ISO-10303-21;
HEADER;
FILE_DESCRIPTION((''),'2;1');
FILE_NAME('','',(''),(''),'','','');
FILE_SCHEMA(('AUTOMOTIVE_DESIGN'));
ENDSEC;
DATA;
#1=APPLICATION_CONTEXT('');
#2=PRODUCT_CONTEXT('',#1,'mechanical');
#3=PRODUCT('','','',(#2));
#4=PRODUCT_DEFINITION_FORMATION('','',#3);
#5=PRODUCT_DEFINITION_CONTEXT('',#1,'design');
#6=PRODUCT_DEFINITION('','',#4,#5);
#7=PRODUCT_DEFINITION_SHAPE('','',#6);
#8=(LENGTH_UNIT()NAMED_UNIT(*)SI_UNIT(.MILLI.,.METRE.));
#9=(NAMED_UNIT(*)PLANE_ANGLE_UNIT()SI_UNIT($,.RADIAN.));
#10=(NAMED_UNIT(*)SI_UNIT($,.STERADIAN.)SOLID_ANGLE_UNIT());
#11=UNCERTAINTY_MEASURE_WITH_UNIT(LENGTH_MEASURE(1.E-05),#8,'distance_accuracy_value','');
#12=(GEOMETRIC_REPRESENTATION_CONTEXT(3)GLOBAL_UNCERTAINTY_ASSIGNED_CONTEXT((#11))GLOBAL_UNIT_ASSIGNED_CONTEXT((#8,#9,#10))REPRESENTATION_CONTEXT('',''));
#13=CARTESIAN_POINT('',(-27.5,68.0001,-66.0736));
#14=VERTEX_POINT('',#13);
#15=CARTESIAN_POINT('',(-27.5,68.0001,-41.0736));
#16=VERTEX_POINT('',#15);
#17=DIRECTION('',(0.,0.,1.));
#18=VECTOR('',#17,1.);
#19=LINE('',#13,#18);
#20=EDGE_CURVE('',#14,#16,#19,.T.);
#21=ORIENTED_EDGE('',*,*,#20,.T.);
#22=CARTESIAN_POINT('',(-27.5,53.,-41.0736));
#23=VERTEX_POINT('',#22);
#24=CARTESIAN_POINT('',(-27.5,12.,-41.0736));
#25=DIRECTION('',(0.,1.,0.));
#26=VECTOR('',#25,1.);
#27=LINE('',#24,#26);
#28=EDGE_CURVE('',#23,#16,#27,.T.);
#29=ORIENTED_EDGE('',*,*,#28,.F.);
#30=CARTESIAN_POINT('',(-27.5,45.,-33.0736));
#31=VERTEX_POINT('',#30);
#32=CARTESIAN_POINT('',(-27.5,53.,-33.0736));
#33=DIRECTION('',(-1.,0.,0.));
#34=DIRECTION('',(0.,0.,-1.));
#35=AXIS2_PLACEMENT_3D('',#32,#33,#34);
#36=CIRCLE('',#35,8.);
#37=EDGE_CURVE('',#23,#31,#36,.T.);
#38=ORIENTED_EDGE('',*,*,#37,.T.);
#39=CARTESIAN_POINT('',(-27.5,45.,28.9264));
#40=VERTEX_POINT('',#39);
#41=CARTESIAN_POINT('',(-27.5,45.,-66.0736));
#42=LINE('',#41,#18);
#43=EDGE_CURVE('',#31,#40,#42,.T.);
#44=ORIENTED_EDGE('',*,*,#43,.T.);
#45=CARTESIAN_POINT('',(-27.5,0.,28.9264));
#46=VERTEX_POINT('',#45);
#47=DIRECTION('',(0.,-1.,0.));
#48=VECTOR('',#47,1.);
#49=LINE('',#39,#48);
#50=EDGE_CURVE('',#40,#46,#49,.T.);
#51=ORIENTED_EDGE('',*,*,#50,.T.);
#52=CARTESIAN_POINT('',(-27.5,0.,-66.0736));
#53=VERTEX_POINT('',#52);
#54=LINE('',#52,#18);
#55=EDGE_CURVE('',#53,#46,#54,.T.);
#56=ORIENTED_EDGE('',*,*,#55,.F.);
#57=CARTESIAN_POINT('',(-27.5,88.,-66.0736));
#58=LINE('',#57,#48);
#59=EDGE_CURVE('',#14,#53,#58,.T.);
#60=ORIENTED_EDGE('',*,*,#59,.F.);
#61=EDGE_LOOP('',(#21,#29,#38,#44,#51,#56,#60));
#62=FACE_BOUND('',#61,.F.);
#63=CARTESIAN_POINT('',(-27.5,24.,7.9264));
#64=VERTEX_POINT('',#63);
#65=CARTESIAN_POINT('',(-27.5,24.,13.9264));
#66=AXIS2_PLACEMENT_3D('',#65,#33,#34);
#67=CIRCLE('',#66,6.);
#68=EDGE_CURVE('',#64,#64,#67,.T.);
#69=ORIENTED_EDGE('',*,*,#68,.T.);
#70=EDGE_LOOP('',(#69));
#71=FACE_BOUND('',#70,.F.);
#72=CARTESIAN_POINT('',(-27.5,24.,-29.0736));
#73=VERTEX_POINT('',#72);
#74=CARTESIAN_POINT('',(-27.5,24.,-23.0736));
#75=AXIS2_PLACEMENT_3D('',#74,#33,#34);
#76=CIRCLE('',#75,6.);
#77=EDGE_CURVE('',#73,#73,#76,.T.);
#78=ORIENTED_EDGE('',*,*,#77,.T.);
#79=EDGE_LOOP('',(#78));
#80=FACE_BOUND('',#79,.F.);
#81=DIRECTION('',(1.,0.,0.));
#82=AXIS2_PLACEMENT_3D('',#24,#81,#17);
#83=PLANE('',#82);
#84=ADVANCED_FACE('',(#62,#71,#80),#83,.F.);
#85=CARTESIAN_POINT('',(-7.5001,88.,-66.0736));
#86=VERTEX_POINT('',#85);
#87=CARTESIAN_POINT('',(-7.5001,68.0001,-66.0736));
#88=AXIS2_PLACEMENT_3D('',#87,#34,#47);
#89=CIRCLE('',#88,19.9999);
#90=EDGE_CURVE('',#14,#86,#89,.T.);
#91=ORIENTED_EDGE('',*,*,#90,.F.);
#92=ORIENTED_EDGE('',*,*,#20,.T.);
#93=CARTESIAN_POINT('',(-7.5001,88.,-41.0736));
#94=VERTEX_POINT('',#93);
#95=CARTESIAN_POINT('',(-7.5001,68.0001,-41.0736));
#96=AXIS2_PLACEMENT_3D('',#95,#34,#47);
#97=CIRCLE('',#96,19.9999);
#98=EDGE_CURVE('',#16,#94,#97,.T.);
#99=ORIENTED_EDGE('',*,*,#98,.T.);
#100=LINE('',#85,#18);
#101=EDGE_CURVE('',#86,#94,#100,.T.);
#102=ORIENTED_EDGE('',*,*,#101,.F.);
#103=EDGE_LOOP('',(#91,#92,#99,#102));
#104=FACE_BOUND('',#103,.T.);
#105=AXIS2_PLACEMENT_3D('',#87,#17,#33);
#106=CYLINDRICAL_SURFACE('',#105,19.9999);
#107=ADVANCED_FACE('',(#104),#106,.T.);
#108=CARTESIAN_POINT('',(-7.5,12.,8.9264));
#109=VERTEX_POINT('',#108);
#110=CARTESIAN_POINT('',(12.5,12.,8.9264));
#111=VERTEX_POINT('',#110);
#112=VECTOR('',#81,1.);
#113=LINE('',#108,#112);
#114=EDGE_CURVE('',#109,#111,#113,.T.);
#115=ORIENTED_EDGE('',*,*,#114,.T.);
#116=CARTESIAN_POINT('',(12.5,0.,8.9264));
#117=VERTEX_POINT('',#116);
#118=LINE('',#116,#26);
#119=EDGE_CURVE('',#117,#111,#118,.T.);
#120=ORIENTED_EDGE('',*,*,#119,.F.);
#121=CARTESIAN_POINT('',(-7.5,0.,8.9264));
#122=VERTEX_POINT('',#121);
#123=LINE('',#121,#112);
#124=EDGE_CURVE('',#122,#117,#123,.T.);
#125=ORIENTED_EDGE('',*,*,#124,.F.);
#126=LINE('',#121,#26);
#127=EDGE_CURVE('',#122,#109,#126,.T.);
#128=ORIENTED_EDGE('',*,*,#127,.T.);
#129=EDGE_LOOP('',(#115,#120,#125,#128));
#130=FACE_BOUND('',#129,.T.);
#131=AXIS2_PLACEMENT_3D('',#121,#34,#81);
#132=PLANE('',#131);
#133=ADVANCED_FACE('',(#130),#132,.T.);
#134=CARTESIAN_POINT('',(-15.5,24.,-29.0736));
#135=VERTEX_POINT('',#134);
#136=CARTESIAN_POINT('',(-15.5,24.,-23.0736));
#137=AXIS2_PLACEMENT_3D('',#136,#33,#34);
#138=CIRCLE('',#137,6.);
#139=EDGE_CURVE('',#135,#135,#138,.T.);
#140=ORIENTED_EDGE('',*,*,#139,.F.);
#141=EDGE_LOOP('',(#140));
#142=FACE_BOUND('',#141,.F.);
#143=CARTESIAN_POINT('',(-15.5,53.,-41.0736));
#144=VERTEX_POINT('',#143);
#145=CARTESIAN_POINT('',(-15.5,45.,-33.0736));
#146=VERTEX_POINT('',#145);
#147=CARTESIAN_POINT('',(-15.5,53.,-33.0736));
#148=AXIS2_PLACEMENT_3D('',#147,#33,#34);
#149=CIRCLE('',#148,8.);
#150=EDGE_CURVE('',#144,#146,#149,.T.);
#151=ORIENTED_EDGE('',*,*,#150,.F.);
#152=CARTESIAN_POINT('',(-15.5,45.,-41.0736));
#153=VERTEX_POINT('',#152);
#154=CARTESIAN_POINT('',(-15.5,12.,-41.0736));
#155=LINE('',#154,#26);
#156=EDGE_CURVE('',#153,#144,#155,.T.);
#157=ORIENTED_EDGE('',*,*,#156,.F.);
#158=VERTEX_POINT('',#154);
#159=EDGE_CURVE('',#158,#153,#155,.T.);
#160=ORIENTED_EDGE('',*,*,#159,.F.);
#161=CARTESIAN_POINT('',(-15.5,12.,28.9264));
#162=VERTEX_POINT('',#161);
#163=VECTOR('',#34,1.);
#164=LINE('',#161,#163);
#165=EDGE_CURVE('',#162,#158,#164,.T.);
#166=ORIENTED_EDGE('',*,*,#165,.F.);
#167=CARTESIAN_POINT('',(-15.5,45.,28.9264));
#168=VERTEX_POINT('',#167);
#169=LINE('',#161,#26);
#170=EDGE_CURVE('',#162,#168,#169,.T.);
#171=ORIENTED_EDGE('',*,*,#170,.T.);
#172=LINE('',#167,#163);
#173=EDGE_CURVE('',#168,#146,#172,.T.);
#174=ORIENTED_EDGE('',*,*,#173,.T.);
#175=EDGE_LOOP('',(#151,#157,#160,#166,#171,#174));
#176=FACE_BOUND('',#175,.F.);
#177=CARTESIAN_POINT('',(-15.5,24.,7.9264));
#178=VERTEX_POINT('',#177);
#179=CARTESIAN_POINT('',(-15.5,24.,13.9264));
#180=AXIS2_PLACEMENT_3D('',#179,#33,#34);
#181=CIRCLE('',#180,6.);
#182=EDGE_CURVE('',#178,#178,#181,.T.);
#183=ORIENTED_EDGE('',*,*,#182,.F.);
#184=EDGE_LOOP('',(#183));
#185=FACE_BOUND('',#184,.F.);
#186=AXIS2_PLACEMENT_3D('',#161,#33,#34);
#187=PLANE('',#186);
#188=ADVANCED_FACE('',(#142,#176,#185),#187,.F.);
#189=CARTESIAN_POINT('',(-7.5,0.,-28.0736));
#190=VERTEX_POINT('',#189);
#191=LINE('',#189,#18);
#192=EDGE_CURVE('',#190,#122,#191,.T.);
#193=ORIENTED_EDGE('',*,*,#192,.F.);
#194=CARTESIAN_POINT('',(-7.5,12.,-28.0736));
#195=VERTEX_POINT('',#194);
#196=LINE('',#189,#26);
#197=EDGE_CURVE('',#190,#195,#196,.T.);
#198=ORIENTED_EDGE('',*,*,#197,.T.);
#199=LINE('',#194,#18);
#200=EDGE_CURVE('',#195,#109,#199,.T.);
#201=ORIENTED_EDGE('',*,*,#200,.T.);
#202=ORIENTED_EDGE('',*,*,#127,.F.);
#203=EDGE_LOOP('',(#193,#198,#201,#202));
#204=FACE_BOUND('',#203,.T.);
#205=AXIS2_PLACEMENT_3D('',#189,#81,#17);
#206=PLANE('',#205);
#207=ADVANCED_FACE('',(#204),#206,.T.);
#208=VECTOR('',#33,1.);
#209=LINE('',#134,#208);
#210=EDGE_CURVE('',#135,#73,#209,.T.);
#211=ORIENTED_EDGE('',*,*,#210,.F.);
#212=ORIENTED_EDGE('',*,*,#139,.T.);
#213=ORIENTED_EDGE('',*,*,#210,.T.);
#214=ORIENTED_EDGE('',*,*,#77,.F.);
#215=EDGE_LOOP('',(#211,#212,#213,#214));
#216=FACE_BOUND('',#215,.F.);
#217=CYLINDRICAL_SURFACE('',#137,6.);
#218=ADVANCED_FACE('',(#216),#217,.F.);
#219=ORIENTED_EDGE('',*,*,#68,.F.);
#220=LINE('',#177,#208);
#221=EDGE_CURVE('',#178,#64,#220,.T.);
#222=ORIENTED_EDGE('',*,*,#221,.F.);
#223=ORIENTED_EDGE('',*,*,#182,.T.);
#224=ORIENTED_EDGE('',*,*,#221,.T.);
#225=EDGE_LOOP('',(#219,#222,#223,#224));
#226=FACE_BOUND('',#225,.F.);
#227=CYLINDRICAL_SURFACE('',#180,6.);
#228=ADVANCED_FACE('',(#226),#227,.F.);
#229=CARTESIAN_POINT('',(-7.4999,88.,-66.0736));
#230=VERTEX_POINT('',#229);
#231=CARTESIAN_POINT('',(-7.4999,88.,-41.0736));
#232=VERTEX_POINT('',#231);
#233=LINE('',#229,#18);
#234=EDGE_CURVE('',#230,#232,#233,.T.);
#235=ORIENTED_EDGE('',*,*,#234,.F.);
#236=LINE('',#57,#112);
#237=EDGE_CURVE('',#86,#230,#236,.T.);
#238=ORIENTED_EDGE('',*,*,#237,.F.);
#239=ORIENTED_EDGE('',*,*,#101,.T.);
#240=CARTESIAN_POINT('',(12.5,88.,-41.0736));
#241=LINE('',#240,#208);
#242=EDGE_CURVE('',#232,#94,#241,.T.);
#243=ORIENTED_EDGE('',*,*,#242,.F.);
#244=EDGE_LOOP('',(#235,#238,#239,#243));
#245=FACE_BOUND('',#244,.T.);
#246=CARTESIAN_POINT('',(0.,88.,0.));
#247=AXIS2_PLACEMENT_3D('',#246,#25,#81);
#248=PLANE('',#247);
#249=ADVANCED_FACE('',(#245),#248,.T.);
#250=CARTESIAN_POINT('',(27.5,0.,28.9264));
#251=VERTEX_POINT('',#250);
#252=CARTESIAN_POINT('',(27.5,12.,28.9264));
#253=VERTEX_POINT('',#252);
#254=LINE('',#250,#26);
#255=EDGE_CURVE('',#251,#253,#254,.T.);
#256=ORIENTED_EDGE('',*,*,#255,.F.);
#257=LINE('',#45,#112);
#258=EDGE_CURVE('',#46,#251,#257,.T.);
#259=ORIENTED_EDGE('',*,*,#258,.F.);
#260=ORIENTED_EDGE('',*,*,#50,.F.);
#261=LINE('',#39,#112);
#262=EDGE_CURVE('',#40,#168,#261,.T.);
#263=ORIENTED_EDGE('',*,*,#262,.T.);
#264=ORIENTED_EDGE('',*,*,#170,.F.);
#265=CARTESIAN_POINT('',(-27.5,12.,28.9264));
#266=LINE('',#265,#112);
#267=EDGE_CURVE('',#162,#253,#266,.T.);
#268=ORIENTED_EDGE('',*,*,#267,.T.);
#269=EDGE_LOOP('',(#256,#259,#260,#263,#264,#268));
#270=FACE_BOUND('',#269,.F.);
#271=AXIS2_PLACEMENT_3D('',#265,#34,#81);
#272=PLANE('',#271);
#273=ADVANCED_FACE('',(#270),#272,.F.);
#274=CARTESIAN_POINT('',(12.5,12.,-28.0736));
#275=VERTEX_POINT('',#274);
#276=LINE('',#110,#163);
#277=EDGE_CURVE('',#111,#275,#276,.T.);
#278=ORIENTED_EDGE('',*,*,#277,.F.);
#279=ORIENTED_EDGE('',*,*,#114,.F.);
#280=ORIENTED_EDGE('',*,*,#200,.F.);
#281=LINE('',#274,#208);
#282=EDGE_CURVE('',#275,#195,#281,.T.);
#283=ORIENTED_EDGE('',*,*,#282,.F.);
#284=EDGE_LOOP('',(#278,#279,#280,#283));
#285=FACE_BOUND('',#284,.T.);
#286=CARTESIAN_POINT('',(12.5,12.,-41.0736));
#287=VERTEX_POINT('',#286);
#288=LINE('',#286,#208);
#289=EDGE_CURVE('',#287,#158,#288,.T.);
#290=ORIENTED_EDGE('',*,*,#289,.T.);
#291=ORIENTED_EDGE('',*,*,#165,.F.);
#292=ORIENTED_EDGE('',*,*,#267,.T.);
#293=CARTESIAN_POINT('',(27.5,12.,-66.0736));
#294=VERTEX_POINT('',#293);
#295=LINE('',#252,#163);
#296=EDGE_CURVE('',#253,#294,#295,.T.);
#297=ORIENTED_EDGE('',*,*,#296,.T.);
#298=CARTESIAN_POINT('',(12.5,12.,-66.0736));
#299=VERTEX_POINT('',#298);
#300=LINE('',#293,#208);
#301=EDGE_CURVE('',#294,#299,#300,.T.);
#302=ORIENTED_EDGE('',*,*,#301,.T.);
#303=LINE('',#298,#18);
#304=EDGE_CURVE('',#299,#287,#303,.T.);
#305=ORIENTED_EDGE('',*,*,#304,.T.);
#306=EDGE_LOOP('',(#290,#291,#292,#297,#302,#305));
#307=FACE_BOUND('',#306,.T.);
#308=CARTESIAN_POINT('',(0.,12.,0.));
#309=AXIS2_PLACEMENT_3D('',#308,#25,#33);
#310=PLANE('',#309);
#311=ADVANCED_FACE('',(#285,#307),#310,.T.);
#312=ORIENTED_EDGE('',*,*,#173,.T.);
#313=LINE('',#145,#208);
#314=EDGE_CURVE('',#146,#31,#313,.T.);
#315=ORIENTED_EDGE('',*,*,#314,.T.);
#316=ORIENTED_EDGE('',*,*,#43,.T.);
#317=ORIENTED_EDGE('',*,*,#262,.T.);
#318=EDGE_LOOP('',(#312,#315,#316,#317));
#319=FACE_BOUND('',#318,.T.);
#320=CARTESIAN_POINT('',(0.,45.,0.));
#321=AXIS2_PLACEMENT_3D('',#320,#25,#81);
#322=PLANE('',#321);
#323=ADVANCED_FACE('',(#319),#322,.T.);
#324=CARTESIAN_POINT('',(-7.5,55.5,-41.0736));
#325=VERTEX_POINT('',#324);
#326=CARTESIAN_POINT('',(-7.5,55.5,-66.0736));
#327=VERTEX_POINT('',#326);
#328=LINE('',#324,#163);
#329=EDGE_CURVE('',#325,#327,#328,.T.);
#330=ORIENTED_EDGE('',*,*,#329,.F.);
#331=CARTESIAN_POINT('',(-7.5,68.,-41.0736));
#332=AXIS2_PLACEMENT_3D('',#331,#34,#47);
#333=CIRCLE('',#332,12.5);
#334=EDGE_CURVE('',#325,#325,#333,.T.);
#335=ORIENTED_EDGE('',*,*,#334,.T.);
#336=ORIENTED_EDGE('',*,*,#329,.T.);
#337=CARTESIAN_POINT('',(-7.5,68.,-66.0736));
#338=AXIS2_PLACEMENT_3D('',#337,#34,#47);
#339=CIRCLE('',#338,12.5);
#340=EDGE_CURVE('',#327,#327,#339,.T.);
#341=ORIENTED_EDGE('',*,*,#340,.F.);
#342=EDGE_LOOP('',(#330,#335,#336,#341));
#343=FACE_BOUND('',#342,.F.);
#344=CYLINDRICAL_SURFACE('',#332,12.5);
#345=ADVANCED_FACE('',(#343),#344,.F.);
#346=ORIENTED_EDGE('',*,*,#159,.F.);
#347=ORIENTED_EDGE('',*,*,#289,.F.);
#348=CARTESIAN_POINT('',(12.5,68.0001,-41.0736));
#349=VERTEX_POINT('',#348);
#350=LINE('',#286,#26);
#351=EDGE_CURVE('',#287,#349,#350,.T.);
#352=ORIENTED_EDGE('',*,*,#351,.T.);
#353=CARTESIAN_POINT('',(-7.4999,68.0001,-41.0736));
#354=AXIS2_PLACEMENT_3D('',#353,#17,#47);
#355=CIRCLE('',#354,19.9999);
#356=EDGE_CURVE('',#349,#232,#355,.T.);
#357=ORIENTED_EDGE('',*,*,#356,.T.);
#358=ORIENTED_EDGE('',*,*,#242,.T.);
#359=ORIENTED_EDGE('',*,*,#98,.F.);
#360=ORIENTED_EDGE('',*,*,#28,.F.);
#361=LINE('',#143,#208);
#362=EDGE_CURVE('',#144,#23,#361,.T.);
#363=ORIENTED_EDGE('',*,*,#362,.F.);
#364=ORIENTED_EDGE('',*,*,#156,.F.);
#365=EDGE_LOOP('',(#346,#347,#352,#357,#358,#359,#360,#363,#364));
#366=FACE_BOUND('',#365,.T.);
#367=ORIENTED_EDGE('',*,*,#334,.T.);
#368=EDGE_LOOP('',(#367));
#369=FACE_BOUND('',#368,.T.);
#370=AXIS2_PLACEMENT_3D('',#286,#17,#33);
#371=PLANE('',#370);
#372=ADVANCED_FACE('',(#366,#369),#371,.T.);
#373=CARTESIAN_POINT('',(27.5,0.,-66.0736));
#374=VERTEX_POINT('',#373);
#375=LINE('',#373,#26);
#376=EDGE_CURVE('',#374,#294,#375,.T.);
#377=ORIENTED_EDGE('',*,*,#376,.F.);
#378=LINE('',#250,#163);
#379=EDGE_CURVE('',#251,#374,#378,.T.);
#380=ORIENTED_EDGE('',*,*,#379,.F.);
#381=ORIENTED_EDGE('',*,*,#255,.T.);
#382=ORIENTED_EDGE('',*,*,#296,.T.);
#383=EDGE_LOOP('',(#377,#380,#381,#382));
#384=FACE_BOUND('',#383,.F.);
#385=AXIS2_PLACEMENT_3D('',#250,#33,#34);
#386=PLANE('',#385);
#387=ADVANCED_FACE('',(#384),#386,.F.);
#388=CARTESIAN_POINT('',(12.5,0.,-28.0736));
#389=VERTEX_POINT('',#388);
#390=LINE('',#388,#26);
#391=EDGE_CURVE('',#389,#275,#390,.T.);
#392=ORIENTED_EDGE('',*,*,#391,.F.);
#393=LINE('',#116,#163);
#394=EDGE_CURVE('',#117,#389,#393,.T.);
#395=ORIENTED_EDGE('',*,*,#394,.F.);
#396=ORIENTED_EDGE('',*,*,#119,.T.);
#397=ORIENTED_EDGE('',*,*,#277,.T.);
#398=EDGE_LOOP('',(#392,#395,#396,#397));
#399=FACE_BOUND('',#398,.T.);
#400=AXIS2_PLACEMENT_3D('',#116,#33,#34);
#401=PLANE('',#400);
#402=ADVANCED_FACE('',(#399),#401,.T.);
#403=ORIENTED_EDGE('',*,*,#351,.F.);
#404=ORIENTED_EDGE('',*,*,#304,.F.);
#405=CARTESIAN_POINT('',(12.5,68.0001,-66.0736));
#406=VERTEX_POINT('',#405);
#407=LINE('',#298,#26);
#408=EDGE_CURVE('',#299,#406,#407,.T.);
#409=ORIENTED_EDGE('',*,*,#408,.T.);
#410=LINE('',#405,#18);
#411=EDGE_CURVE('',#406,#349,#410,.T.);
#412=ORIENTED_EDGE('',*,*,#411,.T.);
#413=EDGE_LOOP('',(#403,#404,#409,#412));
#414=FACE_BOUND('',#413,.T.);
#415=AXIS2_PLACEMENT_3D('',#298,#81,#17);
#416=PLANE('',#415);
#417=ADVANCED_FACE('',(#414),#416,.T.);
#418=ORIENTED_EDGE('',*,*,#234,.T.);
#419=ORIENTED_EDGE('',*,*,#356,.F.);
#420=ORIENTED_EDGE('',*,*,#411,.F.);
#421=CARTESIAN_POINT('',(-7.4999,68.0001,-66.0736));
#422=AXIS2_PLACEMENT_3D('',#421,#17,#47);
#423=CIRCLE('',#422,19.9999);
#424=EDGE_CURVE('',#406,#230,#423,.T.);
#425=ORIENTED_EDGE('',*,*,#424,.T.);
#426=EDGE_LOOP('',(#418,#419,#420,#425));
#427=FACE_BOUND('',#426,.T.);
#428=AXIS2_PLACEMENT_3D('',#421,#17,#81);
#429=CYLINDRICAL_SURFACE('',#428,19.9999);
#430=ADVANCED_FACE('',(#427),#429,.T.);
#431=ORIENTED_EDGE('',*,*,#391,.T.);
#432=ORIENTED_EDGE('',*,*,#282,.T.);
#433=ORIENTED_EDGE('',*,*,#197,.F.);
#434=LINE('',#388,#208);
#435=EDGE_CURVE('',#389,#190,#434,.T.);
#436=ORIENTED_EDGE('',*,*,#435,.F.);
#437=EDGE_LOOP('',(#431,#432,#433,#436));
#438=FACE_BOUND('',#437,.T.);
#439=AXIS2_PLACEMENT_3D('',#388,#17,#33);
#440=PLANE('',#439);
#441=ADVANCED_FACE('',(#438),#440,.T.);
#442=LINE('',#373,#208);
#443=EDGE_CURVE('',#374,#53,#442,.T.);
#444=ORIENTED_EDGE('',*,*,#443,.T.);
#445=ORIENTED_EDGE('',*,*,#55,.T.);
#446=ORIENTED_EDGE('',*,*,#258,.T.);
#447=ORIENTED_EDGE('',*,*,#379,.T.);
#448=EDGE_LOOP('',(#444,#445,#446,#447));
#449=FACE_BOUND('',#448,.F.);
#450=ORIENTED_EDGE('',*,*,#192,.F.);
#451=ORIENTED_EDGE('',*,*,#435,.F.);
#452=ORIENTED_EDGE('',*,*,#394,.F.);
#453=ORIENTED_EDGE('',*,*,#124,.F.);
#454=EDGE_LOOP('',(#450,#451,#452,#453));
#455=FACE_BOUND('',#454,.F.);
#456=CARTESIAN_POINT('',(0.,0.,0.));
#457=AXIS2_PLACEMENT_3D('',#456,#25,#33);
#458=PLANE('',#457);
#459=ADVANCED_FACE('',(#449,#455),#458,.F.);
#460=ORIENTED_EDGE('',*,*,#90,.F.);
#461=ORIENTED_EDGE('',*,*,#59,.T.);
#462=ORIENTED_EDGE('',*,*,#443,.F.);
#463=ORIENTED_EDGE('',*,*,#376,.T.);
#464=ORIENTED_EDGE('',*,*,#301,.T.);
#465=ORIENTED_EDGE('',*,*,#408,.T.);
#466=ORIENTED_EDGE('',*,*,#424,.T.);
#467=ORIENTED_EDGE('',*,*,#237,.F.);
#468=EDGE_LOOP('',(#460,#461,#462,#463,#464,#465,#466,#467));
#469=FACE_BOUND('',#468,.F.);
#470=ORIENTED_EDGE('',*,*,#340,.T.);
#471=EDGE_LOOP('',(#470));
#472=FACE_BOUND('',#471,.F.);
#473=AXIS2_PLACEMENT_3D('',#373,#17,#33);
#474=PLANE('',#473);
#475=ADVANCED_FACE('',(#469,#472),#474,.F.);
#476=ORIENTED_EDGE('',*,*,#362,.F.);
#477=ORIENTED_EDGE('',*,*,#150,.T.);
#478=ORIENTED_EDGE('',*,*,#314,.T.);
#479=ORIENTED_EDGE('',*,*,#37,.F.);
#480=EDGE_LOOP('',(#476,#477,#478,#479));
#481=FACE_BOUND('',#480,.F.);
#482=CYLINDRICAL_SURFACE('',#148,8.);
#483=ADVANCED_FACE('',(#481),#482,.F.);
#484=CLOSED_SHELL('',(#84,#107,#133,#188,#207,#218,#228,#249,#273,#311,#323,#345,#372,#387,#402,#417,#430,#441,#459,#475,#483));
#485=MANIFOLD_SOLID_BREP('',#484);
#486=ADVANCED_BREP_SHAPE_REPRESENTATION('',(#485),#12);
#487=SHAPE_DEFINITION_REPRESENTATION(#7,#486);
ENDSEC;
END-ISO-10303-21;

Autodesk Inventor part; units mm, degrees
ref_plane "YZ Plane" through (0, 0, 0) normal (1, 0, 0) x (0, 1, 0)
ref_plane "XZ Plane" through (0, 0, 0) normal (0, 1, 0) x (-1, 0, 0)
ref_plane "XY Plane" through (0, 0, 0) normal (0, 0, 1) x (1, 0, 0)
sketch "Szkic1" plane through (0, 0, 0) normal (0, 1, 0) x (-1, 0, 0)
  line L0 (27.5, 28.9264) -> (-27.5, 28.9264)
  line L1 (-27.5, 28.9264) -> (-27.5, -66.0736)
  line L2 (-27.5, -66.0736) -> (27.5, -66.0736)
  line L3 (27.5, -66.0736) -> (27.5, 28.9264)
  line L4 (-12.5, -28.0736) -> (7.5, -28.0736)
  line L5 (7.5, -28.0736) -> (7.5, 8.9264)
  line L6 (7.5, 8.9264) -> (-12.5, 8.9264)
  line L7 (-12.5, 8.9264) -> (-12.5, -28.0736)
  point P0 (0, 0)
  point P1 (27.5, -18.5736)
  dimension "d0" = 55
  dimension "d1" = 95
  dimension "d3" = 20
  dimension "d4" = 37
  dimension "d5" = 38
  dimension "d6" = 40
extrude "Wyciągnięcie proste1" add sketch "Szkic1" along normal blind 12
sketch "Szkic2" plane through (0, 12, 0) normal (0, 1, 0) x (1, 0, 0)
  line L0 (-27.5, 66.0736) -> (-27.5, -28.9264) projected
  line L1 (-27.5, 66.0736) -> (12.5, 66.0736)
  line L2 (12.5, 66.0736) -> (12.5, 41.0736)
  line L3 (12.5, 41.0736) -> (-27.5, 41.0736)
  line L4 (-27.5, 41.0736) -> (-27.5, 66.0736)
  point P0 (0, 0)
  dimension "d9" = 40
  dimension "d10" = 25
extrude "Wyciągnięcie proste2" add sketch "Szkic2" along normal blind 76
sketch "Szkic3" plane through (0, 12, 0) normal (0, 1, 0) x (1, 0, 0)
  line L0 (-27.5, 66.0736) -> (-27.5, -28.9264) projected
  line L1 (12.5, 41.0736) -> (-27.5, 41.0736) projected
  line L2 (-27.5, -28.9264) -> (-15.5, -28.9264)
  line L3 (-15.5, -28.9264) -> (-15.5, 41.0736)
  line L4 (-15.5, 41.0736) -> (-27.5, 41.0736)
  line L5 (-27.5, 41.0736) -> (-27.5, -28.9264)
  point P0 (0, 0)
  dimension "d13" = 12
extrude "Wyciągnięcie proste3" add sketch "Szkic3" along normal blind 33
sketch "Szkic4" plane through (-15.5, 12, 28.9264) normal (1, 0, 0) x (0, 0, -1)
  line L0 (0, 0) -> (95, 0) projected
  point P0 (28.9264, -12)
  point P1 (15, 12)
  point P2 (52, 12)
  dimension "d16" = 12
  dimension "d17" = 12
sketch "Szkic5" plane through (-27.5, 88, -41.0736) normal (0, 0, 1) x (1, 0, 0)
  point P0 (27.5, -88)
  point P1 (20, -20)
hole "Otwór1" at (-15.5, 24, 13.9264) at (-15.5, 24, -23.0736) direction (-1, 0, 0) diameter 12 end through all
hole "Otwór2" at (-7.5, 68, -41.0736) direction (0, 0, -1) diameter 25 end through all
full round fillet "Zaokrąglenie pełne1" first side at (12.5, 62.6667, -49.4069) centre faces at (-14.1667, 88, -57.7402) second side at (-27.5, 44.3333, -57.7402)
fillet "Zaokrąglenie powierzchni1" radius 8 1 edges at (-21.5, 45, -41.0736)
